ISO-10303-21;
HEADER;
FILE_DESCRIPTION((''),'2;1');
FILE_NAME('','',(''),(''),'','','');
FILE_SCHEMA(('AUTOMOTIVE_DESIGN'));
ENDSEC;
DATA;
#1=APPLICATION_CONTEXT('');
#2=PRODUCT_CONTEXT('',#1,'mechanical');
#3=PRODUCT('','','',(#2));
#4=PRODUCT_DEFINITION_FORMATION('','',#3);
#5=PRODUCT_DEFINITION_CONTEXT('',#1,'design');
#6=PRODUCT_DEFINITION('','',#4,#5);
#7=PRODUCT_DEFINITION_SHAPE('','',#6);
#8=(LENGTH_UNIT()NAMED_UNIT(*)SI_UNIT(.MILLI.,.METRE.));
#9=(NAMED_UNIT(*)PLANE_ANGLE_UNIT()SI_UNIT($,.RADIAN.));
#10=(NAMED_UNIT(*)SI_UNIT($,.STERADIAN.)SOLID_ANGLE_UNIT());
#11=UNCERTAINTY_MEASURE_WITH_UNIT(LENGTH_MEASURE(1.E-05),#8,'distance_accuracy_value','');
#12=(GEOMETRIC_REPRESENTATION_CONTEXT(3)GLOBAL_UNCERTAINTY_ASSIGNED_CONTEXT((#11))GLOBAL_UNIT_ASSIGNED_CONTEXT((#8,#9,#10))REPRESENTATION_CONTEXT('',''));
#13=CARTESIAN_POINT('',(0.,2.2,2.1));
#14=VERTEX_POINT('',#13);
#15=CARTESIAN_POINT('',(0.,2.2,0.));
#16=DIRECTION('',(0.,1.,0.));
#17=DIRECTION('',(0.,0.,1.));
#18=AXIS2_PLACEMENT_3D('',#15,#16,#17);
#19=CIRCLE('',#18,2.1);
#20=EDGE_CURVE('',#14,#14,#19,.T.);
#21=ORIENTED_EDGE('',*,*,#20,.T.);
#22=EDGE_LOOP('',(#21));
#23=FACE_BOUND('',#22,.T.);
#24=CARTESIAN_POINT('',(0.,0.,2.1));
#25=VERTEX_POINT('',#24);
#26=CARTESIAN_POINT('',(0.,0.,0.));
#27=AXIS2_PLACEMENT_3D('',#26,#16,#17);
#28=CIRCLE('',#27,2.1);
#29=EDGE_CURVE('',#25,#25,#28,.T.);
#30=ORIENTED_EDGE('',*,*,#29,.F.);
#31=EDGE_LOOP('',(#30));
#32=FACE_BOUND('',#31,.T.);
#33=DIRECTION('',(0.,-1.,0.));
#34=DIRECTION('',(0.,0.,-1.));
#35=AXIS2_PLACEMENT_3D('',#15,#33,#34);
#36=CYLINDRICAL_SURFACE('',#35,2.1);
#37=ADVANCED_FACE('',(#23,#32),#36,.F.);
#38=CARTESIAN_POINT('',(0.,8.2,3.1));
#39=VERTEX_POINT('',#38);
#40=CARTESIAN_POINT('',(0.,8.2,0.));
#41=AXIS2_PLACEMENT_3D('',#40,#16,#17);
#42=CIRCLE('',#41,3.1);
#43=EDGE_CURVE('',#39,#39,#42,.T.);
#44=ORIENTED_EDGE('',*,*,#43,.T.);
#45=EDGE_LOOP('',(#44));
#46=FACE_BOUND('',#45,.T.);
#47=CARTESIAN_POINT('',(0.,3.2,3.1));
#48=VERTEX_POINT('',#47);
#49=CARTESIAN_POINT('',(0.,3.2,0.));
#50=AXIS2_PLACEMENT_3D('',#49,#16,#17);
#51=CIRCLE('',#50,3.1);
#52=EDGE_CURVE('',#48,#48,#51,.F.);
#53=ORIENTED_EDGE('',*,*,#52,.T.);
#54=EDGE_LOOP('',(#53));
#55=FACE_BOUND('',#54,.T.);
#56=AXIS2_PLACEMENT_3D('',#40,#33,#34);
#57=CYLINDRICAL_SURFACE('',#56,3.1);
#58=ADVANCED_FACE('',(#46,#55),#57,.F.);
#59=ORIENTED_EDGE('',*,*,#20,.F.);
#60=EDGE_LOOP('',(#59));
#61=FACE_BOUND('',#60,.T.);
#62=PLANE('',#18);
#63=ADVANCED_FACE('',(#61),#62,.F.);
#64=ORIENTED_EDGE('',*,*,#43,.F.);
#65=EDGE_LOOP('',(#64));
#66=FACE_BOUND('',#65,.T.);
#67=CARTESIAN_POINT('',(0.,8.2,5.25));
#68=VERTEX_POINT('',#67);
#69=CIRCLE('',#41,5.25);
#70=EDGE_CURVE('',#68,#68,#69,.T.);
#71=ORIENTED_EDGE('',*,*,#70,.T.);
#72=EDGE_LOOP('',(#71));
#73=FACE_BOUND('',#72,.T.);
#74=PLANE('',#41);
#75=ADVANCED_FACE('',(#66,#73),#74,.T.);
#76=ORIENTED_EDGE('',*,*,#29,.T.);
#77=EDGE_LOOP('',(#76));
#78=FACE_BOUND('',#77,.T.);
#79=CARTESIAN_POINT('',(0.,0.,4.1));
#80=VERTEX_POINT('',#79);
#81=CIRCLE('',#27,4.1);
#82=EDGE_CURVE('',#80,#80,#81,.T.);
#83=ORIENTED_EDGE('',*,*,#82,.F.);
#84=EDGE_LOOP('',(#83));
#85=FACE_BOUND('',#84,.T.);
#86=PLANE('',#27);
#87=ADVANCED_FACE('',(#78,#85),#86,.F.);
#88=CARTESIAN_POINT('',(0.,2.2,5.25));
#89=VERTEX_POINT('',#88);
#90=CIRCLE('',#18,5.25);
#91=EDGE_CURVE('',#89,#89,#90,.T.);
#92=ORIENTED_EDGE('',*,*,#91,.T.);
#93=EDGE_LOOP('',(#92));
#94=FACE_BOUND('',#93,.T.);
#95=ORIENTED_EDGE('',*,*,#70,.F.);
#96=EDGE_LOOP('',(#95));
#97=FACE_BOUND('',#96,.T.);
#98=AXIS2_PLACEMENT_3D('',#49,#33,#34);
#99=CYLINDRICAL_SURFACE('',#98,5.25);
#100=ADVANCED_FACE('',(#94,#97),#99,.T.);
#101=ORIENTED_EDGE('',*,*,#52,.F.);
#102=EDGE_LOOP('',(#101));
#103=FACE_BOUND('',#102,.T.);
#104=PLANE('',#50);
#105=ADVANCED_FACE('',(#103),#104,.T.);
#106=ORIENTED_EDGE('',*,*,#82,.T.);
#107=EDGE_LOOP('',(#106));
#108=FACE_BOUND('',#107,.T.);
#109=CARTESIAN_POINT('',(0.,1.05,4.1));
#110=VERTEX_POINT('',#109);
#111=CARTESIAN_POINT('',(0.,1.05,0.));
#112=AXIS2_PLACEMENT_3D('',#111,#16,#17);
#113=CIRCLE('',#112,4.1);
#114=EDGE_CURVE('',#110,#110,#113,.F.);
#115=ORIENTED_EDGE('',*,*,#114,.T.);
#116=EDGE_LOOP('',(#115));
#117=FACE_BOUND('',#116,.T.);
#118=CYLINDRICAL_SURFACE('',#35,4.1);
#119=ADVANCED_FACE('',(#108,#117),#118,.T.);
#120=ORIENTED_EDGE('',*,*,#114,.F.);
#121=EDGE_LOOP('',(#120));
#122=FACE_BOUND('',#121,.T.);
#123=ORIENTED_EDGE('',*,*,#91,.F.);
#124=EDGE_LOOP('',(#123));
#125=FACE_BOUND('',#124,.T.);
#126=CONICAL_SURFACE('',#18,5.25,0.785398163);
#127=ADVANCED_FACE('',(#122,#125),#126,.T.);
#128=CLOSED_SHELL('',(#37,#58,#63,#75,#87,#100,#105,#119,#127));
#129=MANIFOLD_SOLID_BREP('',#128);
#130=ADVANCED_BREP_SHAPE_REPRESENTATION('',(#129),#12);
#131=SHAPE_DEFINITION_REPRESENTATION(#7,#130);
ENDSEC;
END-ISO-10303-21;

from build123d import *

# Parameters (mm, degrees)
SKETCH1_R           = 4.1
SKETCH1_R_2         = 2.1
BOSS_EXTRUDE1_DEPTH = 2.2
SKETCH2_R           = 5.25
BOSS_EXTRUDE2_DEPTH = 1
SKETCH3_R           = 5.25
SKETCH3_R_2         = 3.1
BOSS_EXTRUDE3_DEPTH = 5
CHAMFER1_SIZE       = 1.15


with BuildPart() as part:
    # Sketch1 → Boss-Extrude1 (new body)
    with BuildSketch(Plane(origin=(0, 0, 0), x_dir=(1, 0, 0), z_dir=(0, 1, 0))):
        with Locations(Location((0, 0, 0), (0, 0, 270))):
            Circle(SKETCH1_R)
        with Locations(Location((0, 0, 0), (0, 0, 270))):
            Circle(SKETCH1_R_2, mode=Mode.SUBTRACT)
    extrude(amount=BOSS_EXTRUDE1_DEPTH)

    # Sketch2 → Boss-Extrude2 (add)
    with BuildSketch(Plane(origin=(0, 2.2, 0), x_dir=(1, 0, 0), z_dir=(0, 1, 0))):
        with Locations(Location((0, 0, 0), (0, 0, 270))):
            Circle(SKETCH2_R)
    extrude(amount=BOSS_EXTRUDE2_DEPTH)

    # Sketch3 → Boss-Extrude3 (add)
    with BuildSketch(Plane(origin=(0, 3.2, 0), x_dir=(1, 0, 0), z_dir=(0, 1, 0))):
        with Locations(Location((0, 0, 0), (0, 0, 270))):
            Circle(SKETCH3_R)
        with Locations(Location((0, 0, 0), (0, 0, 270))):
            Circle(SKETCH3_R_2, mode=Mode.SUBTRACT)
    extrude(amount=BOSS_EXTRUDE3_DEPTH)

    # Chamfer1
    chamfer1_edges = [part.edges().sort_by_distance(p)[0] for p in [
        (0, 2.2, -4.1),
    ]]
    chamfer(chamfer1_edges, length=CHAMFER1_SIZE - 0.0001)  # a hair under: the kernel refuses the full size


solid = part.part
